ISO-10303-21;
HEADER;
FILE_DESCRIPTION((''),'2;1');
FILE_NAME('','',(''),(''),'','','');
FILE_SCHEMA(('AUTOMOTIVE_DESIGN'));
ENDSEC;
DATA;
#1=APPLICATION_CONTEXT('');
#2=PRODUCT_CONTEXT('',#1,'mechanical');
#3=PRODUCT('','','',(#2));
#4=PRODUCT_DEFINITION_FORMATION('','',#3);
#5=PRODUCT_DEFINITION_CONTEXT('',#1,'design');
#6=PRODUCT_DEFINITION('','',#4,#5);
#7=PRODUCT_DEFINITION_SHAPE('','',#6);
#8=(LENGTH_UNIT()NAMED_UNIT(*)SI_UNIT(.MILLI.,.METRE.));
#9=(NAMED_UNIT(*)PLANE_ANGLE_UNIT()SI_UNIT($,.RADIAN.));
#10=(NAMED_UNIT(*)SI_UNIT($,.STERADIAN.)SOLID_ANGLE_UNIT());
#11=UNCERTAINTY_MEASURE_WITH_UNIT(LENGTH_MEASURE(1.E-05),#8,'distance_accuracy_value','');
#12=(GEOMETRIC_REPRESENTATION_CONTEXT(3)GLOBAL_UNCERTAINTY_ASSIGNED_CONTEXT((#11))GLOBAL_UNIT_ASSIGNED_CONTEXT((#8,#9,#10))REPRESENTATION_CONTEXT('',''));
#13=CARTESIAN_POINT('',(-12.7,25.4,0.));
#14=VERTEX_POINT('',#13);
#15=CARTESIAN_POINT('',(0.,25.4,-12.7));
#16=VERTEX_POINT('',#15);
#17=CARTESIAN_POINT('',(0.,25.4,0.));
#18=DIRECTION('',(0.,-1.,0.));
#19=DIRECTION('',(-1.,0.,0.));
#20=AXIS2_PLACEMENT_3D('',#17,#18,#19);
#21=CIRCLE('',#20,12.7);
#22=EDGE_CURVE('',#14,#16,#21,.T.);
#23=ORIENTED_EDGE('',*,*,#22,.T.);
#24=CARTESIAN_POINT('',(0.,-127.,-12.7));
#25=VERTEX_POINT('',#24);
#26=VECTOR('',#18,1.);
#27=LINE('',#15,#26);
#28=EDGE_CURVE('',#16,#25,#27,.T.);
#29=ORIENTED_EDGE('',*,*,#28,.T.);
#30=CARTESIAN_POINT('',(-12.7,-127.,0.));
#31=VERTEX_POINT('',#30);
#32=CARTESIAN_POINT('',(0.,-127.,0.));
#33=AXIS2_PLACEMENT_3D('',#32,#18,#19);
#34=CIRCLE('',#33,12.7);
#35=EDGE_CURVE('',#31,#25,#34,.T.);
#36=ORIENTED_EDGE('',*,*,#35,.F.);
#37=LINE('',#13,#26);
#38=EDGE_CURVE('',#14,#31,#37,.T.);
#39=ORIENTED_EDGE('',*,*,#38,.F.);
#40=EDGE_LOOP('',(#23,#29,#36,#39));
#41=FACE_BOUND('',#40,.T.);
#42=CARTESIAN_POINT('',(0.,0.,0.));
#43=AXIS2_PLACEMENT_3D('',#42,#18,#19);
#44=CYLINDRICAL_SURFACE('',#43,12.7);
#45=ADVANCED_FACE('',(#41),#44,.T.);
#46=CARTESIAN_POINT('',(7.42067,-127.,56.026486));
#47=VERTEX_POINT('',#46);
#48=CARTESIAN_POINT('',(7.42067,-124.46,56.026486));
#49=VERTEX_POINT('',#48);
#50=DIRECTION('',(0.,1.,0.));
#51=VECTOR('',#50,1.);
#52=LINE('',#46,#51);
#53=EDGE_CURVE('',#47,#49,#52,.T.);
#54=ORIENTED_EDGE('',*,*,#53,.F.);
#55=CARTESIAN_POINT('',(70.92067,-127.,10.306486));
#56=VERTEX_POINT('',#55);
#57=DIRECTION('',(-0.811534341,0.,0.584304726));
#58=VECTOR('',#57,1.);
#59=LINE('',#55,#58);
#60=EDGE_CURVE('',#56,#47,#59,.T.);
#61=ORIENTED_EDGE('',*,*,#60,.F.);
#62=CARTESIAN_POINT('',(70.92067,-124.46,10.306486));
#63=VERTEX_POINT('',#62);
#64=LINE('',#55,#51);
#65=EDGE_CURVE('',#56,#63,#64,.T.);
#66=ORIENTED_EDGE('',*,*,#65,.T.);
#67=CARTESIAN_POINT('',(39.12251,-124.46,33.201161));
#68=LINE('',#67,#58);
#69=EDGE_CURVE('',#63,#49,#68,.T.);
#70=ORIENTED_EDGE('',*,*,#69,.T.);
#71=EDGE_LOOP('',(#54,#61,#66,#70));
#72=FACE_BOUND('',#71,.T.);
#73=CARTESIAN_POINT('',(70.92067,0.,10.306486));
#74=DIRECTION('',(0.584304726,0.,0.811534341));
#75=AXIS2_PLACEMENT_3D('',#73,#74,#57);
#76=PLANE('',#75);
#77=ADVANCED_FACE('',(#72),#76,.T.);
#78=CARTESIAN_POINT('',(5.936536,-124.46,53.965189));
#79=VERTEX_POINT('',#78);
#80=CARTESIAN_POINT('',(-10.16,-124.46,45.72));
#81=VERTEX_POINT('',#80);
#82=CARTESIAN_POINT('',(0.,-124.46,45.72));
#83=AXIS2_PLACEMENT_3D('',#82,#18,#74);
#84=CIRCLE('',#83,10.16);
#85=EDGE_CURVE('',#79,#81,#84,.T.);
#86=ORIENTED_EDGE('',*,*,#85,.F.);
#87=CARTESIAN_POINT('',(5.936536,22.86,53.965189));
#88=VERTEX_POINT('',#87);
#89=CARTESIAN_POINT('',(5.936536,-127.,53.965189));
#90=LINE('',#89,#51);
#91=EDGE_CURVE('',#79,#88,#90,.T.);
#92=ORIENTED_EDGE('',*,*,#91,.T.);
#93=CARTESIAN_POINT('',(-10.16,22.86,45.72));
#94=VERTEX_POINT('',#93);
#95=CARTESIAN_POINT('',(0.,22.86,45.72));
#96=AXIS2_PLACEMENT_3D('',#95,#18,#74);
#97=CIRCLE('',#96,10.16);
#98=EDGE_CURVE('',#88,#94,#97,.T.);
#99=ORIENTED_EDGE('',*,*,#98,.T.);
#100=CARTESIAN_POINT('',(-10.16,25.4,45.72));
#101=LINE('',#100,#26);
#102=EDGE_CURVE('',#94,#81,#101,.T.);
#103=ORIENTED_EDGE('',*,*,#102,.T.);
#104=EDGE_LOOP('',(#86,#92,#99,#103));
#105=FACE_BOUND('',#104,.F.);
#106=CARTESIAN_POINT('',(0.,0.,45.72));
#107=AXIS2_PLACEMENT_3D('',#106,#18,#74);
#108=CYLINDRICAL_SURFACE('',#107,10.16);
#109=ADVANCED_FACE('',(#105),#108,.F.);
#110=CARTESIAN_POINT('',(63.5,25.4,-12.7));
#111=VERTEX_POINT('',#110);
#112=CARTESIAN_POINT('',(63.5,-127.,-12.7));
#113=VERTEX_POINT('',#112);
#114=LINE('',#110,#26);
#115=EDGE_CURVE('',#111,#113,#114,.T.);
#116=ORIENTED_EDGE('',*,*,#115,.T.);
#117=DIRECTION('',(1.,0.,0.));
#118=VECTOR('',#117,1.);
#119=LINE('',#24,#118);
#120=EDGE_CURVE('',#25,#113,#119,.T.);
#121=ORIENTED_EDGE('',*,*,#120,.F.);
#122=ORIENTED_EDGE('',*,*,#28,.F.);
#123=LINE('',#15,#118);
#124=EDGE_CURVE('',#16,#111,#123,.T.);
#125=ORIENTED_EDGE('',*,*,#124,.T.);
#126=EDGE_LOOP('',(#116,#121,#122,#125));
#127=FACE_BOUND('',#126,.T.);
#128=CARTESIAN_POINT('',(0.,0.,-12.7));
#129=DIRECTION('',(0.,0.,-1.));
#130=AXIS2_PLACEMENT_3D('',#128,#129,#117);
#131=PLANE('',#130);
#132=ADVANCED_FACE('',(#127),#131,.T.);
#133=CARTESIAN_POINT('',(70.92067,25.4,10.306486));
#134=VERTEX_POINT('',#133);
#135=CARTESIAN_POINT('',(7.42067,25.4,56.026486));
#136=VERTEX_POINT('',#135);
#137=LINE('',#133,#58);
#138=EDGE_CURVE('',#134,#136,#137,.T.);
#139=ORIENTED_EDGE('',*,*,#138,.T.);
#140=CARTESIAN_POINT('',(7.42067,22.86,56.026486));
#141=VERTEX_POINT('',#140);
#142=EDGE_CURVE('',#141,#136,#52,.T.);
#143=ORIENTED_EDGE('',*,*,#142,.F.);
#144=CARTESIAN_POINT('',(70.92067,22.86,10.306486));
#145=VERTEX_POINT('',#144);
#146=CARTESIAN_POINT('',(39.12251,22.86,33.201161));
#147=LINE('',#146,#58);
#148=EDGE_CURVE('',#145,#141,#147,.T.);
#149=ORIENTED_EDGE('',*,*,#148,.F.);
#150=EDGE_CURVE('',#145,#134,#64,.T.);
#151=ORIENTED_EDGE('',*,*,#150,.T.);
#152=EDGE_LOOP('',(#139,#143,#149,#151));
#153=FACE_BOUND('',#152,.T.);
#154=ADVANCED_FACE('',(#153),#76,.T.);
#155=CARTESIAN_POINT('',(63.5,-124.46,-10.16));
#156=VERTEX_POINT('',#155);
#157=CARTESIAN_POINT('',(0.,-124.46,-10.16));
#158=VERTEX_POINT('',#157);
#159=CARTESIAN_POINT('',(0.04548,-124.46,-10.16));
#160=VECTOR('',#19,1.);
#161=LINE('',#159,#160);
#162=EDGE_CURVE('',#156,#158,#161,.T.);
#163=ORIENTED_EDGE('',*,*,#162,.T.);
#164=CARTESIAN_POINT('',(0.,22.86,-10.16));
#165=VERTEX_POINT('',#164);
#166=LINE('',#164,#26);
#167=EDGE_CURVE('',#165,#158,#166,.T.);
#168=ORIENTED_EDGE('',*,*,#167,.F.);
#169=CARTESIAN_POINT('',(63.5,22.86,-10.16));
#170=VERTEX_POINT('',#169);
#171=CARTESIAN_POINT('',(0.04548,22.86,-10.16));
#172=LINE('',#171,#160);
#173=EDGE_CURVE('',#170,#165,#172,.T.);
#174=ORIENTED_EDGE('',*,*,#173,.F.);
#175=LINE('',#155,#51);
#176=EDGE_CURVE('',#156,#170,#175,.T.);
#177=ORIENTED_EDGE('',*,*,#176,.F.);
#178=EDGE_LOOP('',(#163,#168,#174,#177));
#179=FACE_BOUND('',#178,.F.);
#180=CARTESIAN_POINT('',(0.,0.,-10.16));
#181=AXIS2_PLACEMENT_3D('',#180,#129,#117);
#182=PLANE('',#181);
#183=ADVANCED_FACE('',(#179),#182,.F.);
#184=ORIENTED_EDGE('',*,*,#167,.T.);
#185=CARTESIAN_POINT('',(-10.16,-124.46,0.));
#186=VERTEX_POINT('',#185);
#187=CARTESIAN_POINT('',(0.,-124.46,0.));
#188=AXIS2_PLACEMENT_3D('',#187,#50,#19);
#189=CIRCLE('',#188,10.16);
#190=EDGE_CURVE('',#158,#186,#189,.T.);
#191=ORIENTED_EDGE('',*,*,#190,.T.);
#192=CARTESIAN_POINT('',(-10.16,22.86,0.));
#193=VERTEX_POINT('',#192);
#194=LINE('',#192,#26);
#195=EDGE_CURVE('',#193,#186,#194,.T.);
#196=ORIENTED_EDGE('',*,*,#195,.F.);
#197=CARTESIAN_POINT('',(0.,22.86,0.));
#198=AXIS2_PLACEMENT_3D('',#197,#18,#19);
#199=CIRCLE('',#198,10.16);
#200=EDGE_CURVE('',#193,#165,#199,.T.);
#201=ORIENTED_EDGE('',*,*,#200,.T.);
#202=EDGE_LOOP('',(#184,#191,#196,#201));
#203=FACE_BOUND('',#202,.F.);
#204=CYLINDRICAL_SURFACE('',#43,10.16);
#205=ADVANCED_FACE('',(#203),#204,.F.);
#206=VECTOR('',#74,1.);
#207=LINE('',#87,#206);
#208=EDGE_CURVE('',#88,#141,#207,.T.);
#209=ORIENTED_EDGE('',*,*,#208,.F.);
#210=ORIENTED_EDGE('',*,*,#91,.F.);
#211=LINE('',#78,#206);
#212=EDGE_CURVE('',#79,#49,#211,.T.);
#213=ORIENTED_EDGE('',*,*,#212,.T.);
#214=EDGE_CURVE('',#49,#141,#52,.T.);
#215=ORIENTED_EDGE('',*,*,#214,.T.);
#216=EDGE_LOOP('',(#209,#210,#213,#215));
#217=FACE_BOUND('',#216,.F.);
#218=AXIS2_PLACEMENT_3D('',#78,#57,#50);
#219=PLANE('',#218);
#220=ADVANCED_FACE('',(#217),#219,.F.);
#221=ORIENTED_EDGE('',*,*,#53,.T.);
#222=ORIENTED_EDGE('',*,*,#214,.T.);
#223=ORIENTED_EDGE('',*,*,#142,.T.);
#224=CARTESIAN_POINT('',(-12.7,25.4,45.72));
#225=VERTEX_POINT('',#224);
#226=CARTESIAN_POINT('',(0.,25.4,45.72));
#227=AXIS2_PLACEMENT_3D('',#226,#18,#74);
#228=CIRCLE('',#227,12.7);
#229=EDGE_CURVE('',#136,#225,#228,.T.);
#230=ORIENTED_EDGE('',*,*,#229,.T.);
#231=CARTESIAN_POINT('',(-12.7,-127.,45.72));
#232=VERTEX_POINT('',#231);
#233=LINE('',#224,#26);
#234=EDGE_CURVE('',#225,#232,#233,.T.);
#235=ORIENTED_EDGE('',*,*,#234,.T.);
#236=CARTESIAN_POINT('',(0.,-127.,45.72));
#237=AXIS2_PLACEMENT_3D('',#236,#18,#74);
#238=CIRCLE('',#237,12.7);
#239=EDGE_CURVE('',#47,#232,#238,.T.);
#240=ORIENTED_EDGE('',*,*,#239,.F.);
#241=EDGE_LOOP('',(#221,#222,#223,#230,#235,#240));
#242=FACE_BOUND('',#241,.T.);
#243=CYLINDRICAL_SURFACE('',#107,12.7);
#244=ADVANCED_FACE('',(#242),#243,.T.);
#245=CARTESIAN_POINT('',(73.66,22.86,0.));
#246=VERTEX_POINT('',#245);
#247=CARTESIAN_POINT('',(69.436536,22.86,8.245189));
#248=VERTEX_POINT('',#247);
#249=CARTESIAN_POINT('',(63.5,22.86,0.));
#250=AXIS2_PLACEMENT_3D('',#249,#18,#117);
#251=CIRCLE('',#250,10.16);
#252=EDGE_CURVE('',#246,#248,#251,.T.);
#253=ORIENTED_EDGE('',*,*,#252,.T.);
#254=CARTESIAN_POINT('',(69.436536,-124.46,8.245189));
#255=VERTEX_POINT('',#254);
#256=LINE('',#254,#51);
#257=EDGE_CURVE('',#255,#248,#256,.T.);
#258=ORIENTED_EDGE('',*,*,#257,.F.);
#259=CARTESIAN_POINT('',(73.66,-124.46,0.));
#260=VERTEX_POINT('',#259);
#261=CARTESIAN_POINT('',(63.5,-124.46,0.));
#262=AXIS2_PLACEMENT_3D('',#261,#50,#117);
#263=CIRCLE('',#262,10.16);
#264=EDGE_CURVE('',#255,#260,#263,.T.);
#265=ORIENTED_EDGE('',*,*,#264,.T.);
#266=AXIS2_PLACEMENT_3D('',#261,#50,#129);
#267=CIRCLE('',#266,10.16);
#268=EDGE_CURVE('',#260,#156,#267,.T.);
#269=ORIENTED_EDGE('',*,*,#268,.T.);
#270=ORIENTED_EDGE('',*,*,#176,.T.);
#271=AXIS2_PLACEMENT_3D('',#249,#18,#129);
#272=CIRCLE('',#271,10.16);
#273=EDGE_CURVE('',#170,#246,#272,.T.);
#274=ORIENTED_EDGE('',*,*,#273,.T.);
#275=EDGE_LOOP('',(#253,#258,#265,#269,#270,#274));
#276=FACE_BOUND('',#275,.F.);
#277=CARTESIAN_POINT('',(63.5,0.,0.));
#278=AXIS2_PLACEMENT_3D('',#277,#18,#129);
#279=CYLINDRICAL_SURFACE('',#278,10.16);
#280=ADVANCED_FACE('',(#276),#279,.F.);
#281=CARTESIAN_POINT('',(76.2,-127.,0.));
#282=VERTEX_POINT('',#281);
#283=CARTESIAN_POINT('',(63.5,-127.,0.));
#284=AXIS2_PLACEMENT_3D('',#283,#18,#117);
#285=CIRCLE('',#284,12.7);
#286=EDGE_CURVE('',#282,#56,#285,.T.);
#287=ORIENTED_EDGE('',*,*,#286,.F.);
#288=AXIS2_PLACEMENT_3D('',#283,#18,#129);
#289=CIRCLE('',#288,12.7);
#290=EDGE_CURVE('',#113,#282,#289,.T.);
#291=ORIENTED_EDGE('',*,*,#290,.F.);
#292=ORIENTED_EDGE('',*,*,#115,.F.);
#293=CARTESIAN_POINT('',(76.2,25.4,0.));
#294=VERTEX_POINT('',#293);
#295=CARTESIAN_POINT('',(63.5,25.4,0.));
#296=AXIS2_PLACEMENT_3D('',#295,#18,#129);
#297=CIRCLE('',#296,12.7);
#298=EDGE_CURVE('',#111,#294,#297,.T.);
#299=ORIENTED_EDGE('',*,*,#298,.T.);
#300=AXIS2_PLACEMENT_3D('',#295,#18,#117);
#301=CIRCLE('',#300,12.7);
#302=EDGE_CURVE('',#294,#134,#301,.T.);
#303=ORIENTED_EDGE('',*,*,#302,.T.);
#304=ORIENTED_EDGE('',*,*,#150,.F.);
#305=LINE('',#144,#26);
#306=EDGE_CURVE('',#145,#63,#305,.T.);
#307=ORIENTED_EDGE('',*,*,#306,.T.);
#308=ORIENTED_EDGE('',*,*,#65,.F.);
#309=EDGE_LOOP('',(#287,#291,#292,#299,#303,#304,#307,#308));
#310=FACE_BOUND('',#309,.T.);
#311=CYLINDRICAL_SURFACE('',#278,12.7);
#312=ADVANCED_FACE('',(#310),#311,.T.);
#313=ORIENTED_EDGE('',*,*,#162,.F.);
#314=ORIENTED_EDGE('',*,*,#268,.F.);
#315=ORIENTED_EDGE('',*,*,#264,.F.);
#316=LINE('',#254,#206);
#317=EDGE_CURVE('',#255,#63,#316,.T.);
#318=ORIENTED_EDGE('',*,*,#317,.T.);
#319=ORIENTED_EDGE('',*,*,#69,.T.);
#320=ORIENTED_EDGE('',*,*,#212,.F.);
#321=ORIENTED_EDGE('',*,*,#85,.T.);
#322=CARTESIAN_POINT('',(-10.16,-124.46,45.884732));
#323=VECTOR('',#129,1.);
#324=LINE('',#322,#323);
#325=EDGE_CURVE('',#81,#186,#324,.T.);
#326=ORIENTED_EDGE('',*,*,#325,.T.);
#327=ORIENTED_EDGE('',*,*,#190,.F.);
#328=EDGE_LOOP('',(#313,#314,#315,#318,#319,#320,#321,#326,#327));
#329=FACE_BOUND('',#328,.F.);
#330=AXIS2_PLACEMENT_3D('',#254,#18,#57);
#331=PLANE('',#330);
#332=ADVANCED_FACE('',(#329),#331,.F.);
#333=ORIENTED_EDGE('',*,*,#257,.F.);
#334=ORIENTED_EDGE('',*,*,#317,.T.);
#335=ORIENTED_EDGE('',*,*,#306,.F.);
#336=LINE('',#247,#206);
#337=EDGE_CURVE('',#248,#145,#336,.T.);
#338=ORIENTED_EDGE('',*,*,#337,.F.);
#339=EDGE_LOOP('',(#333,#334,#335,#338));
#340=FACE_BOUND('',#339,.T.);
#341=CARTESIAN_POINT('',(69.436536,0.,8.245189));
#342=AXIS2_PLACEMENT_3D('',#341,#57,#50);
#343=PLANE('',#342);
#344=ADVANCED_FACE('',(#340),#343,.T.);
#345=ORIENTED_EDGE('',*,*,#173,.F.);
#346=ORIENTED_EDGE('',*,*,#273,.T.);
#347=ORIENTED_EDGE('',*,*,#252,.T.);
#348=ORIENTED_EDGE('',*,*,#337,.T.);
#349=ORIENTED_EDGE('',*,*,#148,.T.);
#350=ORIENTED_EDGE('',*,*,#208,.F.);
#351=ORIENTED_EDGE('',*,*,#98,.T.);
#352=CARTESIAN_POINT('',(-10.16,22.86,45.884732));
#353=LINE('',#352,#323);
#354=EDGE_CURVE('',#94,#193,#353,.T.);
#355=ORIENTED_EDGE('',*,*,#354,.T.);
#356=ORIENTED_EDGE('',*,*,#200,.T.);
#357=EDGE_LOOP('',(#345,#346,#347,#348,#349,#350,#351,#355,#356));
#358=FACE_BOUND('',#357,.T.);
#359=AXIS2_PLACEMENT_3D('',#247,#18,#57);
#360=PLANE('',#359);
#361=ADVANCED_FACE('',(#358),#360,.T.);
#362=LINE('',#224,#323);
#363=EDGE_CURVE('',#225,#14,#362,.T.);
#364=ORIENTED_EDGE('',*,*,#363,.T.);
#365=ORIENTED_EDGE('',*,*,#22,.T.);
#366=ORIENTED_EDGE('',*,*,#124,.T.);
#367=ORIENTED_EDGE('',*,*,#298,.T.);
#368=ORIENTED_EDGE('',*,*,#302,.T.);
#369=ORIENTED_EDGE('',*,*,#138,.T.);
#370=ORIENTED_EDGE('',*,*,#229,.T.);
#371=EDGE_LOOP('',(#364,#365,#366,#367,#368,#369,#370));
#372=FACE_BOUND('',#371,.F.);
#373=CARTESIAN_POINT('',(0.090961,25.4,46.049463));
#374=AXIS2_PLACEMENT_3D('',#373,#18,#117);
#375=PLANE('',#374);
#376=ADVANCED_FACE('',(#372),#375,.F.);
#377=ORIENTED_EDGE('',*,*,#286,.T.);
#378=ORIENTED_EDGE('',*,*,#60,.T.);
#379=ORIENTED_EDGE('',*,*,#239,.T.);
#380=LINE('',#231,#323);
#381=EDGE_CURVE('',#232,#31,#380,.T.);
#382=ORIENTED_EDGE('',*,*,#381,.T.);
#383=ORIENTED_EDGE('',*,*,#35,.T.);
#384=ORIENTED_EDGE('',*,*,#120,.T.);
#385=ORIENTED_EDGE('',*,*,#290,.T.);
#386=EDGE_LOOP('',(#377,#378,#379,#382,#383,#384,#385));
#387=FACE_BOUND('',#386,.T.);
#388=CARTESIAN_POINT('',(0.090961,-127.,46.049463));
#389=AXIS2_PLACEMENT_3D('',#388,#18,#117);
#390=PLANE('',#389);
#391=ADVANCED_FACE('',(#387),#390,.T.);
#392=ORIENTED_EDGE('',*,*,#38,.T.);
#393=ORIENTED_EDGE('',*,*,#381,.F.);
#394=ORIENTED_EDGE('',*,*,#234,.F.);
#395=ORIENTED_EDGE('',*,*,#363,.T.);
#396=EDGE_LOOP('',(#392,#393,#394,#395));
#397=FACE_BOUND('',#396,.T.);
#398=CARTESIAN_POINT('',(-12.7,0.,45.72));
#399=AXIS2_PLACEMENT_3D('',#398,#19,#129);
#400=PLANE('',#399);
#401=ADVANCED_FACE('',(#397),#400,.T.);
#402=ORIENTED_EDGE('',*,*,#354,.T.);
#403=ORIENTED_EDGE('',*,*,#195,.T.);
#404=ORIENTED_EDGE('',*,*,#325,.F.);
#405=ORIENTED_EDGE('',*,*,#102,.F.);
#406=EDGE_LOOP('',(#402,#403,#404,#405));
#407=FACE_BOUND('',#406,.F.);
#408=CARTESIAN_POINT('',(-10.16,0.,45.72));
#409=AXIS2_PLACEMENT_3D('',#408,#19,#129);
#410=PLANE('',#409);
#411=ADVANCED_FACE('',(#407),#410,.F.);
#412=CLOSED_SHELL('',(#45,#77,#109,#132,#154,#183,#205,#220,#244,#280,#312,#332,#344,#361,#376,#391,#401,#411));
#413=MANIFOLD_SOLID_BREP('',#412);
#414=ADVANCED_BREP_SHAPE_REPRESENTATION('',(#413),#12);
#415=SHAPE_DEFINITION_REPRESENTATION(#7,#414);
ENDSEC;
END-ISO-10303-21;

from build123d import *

# Parameters (mm, degrees)
F1_DEPTH      = 127
F1_DEPTH_BACK = 25.4
F3_T          = -2.54


# Not quite as in the source:
# - a feature of the source that left no trace in its solid (it failed there, or was rolled back) is left out
# - a shell that OpenCascade refuses in one call is made with other operations: the cavity is built on its own and cut out


with BuildPart() as f1:
    # F0 (on Front) → F1 (new body, two sides)
    with BuildSketch(Plane.XZ) as f1_sk:
        with BuildLine():
            ThreePointArc((-12.7, 45.72), (0, 33.02), (12.7, 45.72))
            ThreePointArc((12.7, 45.72), (11.3033735945, 51.5099693768), (7.4206700182, 56.0264861364))
            ThreePointArc((7.4206700182, 56.0264861364), (-5.7899693768, 57.0233735945), (-12.7, 45.72))
        make_face()
        with BuildLine():
            ThreePointArc((7.4206700182, 56.0264861364), (11.3033735945, 51.5099693768), (12.7, 45.72))
            ThreePointArc((12.7, 45.72), (0, 33.02), (-12.7, 45.72))
            Line((-12.7, 45.72), (-12.7, 0))
            ThreePointArc((-12.7, 0), (0, 12.7), (12.7, 0))
            ThreePointArc((12.7, 0), (8.9802561211, -8.9802561211), (0, -12.7))
            Line((0, -12.7), (63.5, -12.7))
            ThreePointArc((63.5, -12.7), (51.4131812719, 3.8985655097), (70.9206700182, 10.3064861364))
            Line((70.9206700182, 10.3064861364), (7.4206700182, 56.0264861364))
        make_face()
        with BuildLine():
            ThreePointArc((76.2, 0), (74.8033735945, 5.7899693768), (70.9206700182, 10.3064861364))
            ThreePointArc((70.9206700182, 10.3064861364), (51.4131812719, 3.8985655097), (63.5, -12.7))
            ThreePointArc((63.5, -12.7), (72.4802561211, -8.9802561211), (76.2, 0))
        make_face()
        with BuildLine():
            ThreePointArc((12.7, 0), (0, 12.7), (-12.7, 0))
            ThreePointArc((-12.7, 0), (-8.9802561211, -8.9802561211), (0, -12.7))
            ThreePointArc((0, -12.7), (8.9802561211, -8.9802561211), (12.7, 0))
        make_face()
    extrude(amount=F1_DEPTH)
    extrude(f1_sk.sketch, amount=-F1_DEPTH_BACK)

    # F3: a shell. OpenCascade refuses it in one call, so the cavity is built on its own and cut out:
    # the body offset inwards by the wall thickness, plus a prism from it out through each open face.
    f3_core = offset(f1.part, amount=F3_T, mode=Mode.PRIVATE)
    f3_exits = [f3_core.faces().sort_by_distance(p)[0] for p in [
        (37.686536, -50.8, 31.105189),
    ]]
    add(f3_core, mode=Mode.SUBTRACT)
    extrude(f3_exits, amount=-F3_T, mode=Mode.SUBTRACT)


solid = f1.part
